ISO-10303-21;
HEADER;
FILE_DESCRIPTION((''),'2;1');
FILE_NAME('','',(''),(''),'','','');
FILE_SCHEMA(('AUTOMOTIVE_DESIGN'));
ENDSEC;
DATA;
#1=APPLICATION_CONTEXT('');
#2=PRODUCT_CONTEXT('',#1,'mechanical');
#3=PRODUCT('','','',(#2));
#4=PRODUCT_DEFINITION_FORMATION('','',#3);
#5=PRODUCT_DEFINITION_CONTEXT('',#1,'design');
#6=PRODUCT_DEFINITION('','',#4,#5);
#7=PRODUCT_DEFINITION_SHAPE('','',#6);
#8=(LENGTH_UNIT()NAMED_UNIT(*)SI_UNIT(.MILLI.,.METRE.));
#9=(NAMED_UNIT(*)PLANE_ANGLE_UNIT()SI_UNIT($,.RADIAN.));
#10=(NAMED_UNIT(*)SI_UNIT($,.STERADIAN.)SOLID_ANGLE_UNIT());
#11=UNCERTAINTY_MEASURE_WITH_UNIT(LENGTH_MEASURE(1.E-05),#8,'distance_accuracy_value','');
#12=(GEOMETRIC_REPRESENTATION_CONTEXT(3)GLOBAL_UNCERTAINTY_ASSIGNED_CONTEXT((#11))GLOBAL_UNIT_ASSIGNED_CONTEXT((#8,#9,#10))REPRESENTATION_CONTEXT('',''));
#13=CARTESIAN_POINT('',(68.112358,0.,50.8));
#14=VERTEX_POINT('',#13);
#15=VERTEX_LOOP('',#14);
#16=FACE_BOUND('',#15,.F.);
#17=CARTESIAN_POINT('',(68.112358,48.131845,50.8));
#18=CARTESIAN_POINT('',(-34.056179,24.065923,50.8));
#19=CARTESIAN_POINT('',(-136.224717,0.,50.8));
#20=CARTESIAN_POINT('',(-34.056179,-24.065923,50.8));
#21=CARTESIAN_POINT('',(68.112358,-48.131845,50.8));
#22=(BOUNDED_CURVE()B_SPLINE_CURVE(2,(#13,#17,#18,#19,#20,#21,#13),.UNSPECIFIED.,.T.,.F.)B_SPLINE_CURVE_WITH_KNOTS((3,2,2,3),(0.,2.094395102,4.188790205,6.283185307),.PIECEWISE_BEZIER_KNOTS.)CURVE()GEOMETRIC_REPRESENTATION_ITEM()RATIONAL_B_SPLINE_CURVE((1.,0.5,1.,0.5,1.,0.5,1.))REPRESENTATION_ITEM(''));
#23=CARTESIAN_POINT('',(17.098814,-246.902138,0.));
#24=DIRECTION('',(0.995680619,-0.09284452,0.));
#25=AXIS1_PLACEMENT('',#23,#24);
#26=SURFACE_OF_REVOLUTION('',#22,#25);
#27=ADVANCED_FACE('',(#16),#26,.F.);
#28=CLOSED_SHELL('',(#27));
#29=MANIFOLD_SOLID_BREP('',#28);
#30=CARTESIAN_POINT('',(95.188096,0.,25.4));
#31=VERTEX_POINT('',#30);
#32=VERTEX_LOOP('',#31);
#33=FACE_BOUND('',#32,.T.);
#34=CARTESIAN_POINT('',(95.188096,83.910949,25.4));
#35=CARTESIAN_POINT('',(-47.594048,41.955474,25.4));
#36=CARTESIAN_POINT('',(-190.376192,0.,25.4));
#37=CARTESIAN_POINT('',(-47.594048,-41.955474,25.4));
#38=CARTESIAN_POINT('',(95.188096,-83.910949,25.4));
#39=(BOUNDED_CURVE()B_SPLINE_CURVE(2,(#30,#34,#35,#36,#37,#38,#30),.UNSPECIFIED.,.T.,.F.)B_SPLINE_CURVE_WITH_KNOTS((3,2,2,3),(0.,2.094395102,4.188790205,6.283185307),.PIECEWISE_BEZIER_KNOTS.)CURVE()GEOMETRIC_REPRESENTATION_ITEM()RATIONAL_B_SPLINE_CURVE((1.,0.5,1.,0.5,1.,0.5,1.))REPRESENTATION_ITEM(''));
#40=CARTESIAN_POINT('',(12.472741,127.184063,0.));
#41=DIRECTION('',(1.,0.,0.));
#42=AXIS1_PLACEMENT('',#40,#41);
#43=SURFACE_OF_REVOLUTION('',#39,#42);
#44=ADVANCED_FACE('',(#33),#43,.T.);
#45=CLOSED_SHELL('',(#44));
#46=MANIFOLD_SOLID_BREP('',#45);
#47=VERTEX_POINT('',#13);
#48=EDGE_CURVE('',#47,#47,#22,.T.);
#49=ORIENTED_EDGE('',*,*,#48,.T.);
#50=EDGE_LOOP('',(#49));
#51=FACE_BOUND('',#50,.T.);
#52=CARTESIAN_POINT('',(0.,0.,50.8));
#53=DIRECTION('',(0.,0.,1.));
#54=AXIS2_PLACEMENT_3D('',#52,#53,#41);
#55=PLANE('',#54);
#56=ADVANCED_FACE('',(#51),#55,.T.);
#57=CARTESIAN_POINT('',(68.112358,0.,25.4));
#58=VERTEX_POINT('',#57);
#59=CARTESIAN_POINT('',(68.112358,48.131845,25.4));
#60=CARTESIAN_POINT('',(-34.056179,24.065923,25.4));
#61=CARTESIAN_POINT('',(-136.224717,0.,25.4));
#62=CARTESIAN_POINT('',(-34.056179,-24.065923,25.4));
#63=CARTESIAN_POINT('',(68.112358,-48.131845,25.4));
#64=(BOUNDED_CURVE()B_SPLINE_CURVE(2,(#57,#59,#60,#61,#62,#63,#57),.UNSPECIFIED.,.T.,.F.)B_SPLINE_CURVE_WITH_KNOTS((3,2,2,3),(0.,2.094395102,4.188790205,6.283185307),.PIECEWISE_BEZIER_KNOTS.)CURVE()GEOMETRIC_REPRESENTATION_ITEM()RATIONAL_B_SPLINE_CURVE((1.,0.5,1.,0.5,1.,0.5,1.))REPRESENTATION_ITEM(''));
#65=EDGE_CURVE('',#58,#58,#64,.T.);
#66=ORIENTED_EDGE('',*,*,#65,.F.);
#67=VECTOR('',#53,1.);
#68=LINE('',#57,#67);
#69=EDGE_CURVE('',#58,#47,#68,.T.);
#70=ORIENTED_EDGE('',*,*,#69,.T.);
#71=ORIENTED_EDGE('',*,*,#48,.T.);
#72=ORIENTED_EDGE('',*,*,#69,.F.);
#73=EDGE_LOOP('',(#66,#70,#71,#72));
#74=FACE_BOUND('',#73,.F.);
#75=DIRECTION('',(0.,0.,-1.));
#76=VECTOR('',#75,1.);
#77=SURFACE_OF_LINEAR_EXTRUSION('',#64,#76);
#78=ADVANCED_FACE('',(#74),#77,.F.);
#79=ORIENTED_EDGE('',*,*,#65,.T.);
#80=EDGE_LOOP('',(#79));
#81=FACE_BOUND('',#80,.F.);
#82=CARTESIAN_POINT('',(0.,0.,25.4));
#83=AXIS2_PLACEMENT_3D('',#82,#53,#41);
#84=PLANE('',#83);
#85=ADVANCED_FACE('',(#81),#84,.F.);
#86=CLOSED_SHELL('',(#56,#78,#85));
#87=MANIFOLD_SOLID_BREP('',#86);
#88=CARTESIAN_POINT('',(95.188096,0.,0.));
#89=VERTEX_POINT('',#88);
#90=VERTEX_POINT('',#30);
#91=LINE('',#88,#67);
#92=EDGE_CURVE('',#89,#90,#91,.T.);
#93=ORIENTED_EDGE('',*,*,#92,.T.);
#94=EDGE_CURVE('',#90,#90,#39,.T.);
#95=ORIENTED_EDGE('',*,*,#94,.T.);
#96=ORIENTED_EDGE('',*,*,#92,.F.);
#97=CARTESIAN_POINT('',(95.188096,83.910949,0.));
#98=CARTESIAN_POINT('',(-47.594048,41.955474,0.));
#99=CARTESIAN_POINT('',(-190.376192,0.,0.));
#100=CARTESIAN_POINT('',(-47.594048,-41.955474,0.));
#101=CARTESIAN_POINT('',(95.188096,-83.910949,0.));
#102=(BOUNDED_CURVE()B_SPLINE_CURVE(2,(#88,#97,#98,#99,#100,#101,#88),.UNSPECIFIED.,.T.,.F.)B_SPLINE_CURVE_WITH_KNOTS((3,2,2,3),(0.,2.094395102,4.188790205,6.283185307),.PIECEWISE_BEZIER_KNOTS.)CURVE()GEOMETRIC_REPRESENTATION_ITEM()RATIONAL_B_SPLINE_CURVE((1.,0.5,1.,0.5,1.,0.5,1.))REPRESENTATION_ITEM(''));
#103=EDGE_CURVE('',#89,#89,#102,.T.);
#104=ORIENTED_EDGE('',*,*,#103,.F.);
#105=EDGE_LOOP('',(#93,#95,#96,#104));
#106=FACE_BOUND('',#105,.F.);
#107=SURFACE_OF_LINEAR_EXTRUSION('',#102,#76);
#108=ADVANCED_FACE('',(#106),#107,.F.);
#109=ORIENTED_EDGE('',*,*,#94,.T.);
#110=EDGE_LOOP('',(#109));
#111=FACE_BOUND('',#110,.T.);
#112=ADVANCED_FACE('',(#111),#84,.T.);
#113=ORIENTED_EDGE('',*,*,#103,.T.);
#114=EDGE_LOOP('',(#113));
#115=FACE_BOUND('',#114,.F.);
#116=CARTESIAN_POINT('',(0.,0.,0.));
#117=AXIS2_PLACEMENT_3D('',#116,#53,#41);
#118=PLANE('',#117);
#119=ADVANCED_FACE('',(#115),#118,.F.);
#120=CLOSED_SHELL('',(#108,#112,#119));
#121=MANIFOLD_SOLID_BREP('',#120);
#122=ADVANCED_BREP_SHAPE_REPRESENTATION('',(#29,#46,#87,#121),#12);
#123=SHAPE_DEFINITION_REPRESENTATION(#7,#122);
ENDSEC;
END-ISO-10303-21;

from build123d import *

# Parameters (mm, degrees)
F1_DEPTH = 25.4
F3_DEPTH = 25.4


with BuildPart() as f1:
    # F0 (on Top) → F1 (new body)
    with BuildSketch(Plane.XY):
        with BuildLine():
            add(Edge.make_bspline(
                [(95.1880961657, 0), (95.1880961657, 83.9109485248), (-47.5940480828, 41.9554742624), (-190.3761923313, 0), (-47.5940480828, -41.9554742624), (95.1880961657, -83.9109485248), (95.1880961657, 0)],
                knots=[0, 0, 0, 2.0943951024, 2.0943951024, 4.1887902048, 4.1887902048, 6.2831853072, 6.2831853072, 6.2831853072], degree=2, weights=[1, 0.5, 1, 0.5, 1, 0.5, 1]))
        make_face()
    extrude(amount=F1_DEPTH)


with BuildPart() as f3:
    # F2 (on face) → F3 (new body)
    with BuildSketch(Plane.XY.offset(25.4)):
        with BuildLine():
            add(Edge.make_bspline(
                [(68.1123584509, 0), (68.1123584509, 48.1318450904), (-34.0561792254, 24.0659225452), (-136.2247169018, 0), (-34.0561792254, -24.0659225452), (68.1123584509, -48.1318450904), (68.1123584509, 0)],
                knots=[0, 0, 0, 2.0943951024, 2.0943951024, 4.1887902048, 4.1887902048, 6.2831853072, 6.2831853072, 6.2831853072], degree=2, weights=[1, 0.5, 1, 0.5, 1, 0.5, 1]))
        make_face()
    extrude(amount=F3_DEPTH)


with BuildPart() as f5:
    # F1_face (on face) → F5 (revolve)
    with BuildSketch(Plane(origin=(0.5055157465, 0, 25.4), x_dir=(1, 0, 0), z_dir=(0, 0, 1))):
        with BuildLine():
            add(Edge.make_bspline(
                [(94.6825804191, 0), (94.6825804191, 83.9109485248), (-48.0995638294, 41.9554742624), (-190.8817080778, 0), (-48.0995638294, -41.9554742624), (94.6825804191, -83.9109485248), (94.6825804191, 0)],
                knots=[0, 0, 0, 2.0943951024, 2.0943951024, 4.1887902048, 4.1887902048, 6.2831853072, 6.2831853072, 6.2831853072], degree=2, weights=[1, 0.5, 1, 0.5, 1, 0.5, 1]))
        make_face()
    revolve(axis=Axis((12.4727413058, 127.1840631962, 0), (1, 0, 0)))


with BuildPart() as f7:
    # F3_face (on face) → F7 (revolve)
    with BuildSketch(Plane(origin=(0.361724534, 0, 50.8), x_dir=(1, 0, 0), z_dir=(0, 0, 1))):
        with BuildLine():
            add(Edge.make_bspline(
                [(67.7506339169, 0), (67.7506339169, 48.1318450904), (-34.4179037595, 24.0659225452), (-136.5864414358, 0), (-34.4179037595, -24.0659225452), (67.7506339169, -48.1318450904), (67.7506339169, 0)],
                knots=[0, 0, 0, 2.0943951024, 2.0943951024, 4.1887902048, 4.1887902048, 6.2831853072, 6.2831853072, 6.2831853072], degree=2, weights=[1, 0.5, 1, 0.5, 1, 0.5, 1]))
        make_face()
    revolve(axis=Axis((17.098814249, -246.9021379948, 0), (0.9956806191, -0.0928445197, 0)))


solid = Compound([f1.part, f3.part, f5.part, f7.part])
